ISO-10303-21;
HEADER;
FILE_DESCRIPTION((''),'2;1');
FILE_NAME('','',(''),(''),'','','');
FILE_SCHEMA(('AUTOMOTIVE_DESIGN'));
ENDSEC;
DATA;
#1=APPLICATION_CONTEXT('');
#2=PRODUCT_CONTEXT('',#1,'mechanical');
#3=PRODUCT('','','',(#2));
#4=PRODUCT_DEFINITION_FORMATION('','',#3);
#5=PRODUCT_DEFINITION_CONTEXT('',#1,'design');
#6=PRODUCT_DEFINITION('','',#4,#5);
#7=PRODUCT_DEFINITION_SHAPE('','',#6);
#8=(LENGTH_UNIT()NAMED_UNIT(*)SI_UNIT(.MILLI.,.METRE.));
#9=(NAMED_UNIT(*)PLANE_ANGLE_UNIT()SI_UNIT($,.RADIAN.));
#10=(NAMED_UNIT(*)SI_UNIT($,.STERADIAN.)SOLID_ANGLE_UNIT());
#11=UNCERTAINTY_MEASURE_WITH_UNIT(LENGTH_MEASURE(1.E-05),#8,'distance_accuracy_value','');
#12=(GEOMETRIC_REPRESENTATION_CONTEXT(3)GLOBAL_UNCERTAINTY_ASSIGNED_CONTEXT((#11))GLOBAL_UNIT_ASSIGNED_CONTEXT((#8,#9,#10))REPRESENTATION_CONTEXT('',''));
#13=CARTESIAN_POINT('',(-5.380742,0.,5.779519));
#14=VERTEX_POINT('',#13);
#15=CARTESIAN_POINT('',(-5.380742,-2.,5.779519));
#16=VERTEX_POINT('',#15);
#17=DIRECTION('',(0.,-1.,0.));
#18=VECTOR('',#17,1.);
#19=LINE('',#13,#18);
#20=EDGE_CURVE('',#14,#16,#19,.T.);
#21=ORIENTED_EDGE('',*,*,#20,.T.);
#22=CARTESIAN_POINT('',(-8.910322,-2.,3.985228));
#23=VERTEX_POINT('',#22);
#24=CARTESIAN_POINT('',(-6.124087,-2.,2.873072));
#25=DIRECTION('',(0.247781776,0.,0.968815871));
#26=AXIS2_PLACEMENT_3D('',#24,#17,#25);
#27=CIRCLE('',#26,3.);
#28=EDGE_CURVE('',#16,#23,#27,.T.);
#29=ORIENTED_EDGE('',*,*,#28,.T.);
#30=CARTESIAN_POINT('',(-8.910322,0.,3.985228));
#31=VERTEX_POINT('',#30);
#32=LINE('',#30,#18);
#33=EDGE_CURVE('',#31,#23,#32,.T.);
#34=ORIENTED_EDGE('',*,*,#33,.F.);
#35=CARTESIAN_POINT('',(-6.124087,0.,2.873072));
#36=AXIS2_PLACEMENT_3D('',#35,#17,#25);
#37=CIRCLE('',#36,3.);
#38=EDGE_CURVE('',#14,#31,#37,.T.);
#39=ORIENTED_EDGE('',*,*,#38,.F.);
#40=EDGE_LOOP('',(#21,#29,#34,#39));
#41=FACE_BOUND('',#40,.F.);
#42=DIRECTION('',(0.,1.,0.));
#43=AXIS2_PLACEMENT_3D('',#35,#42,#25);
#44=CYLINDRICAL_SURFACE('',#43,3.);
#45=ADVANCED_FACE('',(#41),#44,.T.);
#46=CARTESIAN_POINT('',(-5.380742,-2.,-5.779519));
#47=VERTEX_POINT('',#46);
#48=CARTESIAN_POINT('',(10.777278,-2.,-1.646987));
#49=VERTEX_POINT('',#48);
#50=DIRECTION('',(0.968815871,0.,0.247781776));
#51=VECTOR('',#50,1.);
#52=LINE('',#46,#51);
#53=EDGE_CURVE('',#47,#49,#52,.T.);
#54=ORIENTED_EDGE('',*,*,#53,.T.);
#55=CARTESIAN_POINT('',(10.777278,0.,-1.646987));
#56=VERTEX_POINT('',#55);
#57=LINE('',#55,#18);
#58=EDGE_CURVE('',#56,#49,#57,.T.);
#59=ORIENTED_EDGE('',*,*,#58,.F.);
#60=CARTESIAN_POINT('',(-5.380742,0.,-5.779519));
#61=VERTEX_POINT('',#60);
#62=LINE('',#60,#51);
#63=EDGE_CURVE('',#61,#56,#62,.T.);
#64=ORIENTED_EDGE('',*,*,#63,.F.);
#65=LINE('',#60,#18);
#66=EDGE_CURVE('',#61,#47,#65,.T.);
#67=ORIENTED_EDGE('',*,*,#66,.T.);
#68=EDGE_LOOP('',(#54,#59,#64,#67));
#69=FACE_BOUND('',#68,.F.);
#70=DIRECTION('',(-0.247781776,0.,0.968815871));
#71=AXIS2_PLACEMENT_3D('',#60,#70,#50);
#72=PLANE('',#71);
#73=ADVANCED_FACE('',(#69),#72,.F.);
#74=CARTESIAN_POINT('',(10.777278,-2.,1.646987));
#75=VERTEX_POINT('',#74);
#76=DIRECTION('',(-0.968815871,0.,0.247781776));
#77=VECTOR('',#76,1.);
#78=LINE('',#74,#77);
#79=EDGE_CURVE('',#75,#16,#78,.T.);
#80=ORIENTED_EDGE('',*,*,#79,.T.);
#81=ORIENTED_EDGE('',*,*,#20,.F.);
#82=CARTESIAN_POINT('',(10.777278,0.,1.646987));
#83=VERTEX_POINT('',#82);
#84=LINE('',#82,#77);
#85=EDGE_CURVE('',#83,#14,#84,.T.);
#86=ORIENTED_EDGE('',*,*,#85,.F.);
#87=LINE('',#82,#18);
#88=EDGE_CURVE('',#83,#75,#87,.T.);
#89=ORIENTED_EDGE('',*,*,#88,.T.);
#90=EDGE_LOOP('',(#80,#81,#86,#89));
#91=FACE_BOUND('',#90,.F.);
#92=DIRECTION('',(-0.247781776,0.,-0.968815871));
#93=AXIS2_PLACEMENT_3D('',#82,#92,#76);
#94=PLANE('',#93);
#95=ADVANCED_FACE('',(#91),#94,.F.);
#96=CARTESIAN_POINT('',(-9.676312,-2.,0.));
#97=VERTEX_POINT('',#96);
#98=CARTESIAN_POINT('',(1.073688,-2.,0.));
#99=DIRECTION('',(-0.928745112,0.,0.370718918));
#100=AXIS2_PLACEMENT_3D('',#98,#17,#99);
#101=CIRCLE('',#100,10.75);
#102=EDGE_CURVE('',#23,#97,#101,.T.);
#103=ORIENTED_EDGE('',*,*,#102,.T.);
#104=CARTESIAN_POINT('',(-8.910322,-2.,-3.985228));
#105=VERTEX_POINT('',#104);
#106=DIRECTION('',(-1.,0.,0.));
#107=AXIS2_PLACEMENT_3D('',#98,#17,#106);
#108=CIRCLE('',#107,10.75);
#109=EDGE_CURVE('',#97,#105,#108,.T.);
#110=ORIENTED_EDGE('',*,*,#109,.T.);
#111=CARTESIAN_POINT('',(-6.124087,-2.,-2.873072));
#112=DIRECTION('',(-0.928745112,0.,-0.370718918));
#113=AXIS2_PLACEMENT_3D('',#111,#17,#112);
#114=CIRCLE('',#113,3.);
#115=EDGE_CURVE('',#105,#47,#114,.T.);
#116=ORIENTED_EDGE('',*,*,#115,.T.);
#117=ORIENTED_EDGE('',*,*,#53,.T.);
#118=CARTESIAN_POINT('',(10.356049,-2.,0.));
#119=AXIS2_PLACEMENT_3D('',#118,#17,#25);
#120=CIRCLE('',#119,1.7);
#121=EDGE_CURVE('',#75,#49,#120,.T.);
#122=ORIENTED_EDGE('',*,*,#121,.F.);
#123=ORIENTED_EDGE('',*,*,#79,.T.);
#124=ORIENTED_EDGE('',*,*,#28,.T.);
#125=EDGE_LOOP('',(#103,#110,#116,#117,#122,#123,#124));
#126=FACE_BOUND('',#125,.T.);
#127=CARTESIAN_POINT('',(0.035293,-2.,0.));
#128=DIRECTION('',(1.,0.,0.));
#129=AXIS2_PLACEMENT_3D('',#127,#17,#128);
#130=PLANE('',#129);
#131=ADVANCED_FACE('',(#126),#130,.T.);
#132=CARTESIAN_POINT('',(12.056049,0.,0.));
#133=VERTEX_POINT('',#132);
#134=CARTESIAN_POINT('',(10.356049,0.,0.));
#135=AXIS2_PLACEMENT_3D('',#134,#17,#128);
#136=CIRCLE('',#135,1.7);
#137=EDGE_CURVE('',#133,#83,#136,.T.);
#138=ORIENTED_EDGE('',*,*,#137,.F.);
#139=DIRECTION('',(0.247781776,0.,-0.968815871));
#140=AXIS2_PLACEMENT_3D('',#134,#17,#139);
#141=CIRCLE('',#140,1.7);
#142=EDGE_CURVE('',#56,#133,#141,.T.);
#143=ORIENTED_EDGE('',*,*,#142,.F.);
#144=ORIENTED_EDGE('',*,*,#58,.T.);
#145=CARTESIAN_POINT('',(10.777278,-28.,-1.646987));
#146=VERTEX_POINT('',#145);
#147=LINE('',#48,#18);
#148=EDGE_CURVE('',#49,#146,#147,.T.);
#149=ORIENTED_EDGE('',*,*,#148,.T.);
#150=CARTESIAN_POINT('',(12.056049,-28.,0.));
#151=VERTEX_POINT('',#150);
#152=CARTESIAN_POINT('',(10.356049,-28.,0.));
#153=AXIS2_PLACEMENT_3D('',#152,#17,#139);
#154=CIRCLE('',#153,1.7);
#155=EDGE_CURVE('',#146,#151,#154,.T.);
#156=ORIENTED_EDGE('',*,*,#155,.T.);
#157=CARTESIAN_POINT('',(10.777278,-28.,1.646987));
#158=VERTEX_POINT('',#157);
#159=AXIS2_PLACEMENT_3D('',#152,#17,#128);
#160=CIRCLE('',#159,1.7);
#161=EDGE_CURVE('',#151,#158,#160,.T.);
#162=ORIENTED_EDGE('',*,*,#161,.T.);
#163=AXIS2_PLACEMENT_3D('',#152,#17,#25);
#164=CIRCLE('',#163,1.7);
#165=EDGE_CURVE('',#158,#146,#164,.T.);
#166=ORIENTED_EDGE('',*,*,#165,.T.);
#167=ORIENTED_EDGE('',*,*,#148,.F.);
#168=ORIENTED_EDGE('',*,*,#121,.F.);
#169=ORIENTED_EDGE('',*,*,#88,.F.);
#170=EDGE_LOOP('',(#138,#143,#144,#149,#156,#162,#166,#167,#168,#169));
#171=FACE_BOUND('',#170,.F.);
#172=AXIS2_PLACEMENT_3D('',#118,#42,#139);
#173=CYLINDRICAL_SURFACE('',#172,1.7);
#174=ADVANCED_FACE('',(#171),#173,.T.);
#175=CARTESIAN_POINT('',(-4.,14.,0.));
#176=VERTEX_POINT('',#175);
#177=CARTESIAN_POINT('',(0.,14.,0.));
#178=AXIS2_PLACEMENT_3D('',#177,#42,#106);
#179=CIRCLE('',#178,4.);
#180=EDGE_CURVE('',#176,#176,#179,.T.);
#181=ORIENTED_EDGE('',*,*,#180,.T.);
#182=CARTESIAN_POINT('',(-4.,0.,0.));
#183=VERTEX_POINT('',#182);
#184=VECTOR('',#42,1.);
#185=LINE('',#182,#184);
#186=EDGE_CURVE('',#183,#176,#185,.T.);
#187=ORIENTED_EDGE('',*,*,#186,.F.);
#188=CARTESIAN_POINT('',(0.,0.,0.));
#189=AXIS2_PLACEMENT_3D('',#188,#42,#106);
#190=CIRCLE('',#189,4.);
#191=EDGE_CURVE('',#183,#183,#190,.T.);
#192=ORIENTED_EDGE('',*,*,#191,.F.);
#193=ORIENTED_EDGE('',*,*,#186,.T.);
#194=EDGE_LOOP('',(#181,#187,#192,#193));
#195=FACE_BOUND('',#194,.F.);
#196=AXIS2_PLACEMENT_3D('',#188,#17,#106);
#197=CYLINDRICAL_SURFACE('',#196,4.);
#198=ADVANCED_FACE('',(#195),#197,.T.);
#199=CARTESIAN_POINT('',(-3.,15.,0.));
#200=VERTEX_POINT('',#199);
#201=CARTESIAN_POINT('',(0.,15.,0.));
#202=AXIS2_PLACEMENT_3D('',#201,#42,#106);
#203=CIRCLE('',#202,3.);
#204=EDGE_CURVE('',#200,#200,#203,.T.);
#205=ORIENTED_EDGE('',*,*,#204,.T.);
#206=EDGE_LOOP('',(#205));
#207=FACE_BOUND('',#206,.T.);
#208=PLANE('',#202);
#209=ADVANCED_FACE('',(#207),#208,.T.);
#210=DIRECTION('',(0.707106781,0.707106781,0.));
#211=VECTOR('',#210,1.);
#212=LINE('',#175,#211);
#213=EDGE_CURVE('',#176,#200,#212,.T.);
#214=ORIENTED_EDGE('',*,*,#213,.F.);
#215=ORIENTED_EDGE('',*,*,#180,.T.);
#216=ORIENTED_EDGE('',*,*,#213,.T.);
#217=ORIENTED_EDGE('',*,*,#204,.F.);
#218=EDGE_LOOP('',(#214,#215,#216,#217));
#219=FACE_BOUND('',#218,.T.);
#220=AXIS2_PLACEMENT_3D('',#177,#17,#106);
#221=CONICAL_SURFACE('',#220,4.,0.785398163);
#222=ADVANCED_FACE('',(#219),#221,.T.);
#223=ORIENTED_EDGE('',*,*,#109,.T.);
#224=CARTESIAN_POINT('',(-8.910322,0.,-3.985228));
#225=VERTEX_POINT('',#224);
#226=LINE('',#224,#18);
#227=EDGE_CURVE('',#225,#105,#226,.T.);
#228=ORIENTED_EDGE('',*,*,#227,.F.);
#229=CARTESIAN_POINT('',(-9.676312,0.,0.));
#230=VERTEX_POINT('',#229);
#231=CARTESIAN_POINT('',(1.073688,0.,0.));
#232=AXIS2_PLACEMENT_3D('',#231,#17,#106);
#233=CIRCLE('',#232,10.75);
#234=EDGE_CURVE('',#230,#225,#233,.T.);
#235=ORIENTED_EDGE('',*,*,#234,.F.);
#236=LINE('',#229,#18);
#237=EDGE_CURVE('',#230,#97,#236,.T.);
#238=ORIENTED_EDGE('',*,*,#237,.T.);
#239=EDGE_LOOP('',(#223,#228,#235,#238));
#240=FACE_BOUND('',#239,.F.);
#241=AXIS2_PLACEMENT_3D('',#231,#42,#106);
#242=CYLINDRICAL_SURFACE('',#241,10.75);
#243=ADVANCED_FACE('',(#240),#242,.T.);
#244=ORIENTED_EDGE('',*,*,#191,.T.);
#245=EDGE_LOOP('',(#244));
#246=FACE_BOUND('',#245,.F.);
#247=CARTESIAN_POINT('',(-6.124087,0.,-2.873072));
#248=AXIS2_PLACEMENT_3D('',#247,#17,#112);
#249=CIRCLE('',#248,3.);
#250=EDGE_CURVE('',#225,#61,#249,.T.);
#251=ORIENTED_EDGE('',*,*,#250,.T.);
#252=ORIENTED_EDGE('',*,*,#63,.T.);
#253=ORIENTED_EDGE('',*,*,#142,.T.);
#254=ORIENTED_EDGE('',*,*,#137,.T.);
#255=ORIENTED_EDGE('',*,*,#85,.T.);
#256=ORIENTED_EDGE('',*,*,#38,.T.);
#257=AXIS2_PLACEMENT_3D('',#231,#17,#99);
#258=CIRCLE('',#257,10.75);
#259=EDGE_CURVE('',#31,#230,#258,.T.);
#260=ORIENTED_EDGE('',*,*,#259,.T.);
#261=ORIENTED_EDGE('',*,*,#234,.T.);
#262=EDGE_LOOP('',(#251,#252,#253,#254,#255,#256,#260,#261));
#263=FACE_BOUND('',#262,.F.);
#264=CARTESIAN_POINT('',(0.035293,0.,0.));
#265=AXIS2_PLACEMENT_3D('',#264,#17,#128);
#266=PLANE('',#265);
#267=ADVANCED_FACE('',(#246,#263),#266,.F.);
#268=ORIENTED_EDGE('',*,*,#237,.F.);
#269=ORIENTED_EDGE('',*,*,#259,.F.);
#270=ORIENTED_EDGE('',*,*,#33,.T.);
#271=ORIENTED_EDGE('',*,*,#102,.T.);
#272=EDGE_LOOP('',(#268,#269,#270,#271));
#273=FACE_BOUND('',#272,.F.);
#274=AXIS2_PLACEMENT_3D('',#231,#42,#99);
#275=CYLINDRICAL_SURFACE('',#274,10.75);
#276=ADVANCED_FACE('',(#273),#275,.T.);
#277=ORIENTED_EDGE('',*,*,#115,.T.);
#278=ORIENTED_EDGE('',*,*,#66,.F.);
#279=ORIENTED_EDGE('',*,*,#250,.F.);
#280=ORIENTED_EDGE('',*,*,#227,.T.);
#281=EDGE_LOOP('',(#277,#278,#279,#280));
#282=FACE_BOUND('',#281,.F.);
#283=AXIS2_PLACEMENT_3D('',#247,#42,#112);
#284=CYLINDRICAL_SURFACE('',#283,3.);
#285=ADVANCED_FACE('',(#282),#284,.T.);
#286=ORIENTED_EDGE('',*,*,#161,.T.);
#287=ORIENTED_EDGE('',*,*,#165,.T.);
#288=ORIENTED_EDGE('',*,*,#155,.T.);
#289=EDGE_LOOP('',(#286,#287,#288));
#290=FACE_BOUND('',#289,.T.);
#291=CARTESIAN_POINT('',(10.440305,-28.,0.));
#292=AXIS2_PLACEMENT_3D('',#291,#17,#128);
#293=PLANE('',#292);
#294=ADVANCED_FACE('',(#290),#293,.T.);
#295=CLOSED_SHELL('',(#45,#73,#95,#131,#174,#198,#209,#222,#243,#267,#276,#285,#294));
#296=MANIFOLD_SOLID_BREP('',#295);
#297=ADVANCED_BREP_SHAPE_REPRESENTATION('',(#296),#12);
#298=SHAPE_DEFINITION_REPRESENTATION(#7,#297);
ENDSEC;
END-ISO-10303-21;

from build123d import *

# Parameters (mm, degrees)
F1_DEPTH = 2
F3_DEPTH = 26
F4_R     = 4
F5_DEPTH = 15
F6_SIZE  = 1


with BuildPart() as f1:
    # F0 (on Front) → F1 (new body)
    with BuildSketch(Plane.XZ):
        with BuildLine():
            ThreePointArc((10.7772780728, -1.6469869803), (11.6988240407, -1.0425715004), (12.0560490534, 0))
            ThreePointArc((12.0560490534, 0), (11.6988240407, 1.0425715004), (10.7772780728, 1.6469869803))
            Line((10.7772780728, 1.6469869803), (-5.3807416604, 5.7795192287))
            ThreePointArc((-5.3807416604, 5.7795192287), (-7.4835794739, 5.5473528625), (-8.9103223258, 3.9852283712))
            ThreePointArc((-8.9103223258, 3.9852283712), (-9.4830781383, 2.0290875977), (-9.6763123684, 0))
            ThreePointArc((-9.6763123684, 0), (-9.4830781383, -2.0290875977), (-8.9103223258, -3.9852283712))
            ThreePointArc((-8.9103223258, -3.9852283712), (-7.4835794739, -5.5473528625), (-5.3807416604, -5.7795192287))
            Line((-5.3807416604, -5.7795192287), (10.7772780728, -1.6469869803))
        make_face()
    extrude(amount=F1_DEPTH)

    # F2 (on face) → F3 (join)
    with BuildSketch(Plane.XZ.offset(2)):
        with BuildLine():
            ThreePointArc((10.7772780728, -1.6469869803), (11.6988240407, -1.0425715004), (12.0560490534, 0))
            ThreePointArc((12.0560490534, 0), (11.6988240407, 1.0425715004), (10.7772780728, 1.6469869803))
            ThreePointArc((10.7772780728, 1.6469869803), (8.6560490534, 0), (10.7772780728, -1.6469869803))
        make_face()
    extrude(amount=F3_DEPTH)

    # F4 (on face) → F5 (join)
    with BuildSketch(Plane(origin=(0, 0, 0), x_dir=(-1, 0, 0), z_dir=(0, 1, 0))):
        Circle(F4_R)
    extrude(amount=F5_DEPTH)

    # F6
    f6_edges = [f1.edges().sort_by_distance(p)[0] for p in [
        (4, 15, 0),
    ]]
    chamfer(f6_edges, length=F6_SIZE)


solid = f1.part
